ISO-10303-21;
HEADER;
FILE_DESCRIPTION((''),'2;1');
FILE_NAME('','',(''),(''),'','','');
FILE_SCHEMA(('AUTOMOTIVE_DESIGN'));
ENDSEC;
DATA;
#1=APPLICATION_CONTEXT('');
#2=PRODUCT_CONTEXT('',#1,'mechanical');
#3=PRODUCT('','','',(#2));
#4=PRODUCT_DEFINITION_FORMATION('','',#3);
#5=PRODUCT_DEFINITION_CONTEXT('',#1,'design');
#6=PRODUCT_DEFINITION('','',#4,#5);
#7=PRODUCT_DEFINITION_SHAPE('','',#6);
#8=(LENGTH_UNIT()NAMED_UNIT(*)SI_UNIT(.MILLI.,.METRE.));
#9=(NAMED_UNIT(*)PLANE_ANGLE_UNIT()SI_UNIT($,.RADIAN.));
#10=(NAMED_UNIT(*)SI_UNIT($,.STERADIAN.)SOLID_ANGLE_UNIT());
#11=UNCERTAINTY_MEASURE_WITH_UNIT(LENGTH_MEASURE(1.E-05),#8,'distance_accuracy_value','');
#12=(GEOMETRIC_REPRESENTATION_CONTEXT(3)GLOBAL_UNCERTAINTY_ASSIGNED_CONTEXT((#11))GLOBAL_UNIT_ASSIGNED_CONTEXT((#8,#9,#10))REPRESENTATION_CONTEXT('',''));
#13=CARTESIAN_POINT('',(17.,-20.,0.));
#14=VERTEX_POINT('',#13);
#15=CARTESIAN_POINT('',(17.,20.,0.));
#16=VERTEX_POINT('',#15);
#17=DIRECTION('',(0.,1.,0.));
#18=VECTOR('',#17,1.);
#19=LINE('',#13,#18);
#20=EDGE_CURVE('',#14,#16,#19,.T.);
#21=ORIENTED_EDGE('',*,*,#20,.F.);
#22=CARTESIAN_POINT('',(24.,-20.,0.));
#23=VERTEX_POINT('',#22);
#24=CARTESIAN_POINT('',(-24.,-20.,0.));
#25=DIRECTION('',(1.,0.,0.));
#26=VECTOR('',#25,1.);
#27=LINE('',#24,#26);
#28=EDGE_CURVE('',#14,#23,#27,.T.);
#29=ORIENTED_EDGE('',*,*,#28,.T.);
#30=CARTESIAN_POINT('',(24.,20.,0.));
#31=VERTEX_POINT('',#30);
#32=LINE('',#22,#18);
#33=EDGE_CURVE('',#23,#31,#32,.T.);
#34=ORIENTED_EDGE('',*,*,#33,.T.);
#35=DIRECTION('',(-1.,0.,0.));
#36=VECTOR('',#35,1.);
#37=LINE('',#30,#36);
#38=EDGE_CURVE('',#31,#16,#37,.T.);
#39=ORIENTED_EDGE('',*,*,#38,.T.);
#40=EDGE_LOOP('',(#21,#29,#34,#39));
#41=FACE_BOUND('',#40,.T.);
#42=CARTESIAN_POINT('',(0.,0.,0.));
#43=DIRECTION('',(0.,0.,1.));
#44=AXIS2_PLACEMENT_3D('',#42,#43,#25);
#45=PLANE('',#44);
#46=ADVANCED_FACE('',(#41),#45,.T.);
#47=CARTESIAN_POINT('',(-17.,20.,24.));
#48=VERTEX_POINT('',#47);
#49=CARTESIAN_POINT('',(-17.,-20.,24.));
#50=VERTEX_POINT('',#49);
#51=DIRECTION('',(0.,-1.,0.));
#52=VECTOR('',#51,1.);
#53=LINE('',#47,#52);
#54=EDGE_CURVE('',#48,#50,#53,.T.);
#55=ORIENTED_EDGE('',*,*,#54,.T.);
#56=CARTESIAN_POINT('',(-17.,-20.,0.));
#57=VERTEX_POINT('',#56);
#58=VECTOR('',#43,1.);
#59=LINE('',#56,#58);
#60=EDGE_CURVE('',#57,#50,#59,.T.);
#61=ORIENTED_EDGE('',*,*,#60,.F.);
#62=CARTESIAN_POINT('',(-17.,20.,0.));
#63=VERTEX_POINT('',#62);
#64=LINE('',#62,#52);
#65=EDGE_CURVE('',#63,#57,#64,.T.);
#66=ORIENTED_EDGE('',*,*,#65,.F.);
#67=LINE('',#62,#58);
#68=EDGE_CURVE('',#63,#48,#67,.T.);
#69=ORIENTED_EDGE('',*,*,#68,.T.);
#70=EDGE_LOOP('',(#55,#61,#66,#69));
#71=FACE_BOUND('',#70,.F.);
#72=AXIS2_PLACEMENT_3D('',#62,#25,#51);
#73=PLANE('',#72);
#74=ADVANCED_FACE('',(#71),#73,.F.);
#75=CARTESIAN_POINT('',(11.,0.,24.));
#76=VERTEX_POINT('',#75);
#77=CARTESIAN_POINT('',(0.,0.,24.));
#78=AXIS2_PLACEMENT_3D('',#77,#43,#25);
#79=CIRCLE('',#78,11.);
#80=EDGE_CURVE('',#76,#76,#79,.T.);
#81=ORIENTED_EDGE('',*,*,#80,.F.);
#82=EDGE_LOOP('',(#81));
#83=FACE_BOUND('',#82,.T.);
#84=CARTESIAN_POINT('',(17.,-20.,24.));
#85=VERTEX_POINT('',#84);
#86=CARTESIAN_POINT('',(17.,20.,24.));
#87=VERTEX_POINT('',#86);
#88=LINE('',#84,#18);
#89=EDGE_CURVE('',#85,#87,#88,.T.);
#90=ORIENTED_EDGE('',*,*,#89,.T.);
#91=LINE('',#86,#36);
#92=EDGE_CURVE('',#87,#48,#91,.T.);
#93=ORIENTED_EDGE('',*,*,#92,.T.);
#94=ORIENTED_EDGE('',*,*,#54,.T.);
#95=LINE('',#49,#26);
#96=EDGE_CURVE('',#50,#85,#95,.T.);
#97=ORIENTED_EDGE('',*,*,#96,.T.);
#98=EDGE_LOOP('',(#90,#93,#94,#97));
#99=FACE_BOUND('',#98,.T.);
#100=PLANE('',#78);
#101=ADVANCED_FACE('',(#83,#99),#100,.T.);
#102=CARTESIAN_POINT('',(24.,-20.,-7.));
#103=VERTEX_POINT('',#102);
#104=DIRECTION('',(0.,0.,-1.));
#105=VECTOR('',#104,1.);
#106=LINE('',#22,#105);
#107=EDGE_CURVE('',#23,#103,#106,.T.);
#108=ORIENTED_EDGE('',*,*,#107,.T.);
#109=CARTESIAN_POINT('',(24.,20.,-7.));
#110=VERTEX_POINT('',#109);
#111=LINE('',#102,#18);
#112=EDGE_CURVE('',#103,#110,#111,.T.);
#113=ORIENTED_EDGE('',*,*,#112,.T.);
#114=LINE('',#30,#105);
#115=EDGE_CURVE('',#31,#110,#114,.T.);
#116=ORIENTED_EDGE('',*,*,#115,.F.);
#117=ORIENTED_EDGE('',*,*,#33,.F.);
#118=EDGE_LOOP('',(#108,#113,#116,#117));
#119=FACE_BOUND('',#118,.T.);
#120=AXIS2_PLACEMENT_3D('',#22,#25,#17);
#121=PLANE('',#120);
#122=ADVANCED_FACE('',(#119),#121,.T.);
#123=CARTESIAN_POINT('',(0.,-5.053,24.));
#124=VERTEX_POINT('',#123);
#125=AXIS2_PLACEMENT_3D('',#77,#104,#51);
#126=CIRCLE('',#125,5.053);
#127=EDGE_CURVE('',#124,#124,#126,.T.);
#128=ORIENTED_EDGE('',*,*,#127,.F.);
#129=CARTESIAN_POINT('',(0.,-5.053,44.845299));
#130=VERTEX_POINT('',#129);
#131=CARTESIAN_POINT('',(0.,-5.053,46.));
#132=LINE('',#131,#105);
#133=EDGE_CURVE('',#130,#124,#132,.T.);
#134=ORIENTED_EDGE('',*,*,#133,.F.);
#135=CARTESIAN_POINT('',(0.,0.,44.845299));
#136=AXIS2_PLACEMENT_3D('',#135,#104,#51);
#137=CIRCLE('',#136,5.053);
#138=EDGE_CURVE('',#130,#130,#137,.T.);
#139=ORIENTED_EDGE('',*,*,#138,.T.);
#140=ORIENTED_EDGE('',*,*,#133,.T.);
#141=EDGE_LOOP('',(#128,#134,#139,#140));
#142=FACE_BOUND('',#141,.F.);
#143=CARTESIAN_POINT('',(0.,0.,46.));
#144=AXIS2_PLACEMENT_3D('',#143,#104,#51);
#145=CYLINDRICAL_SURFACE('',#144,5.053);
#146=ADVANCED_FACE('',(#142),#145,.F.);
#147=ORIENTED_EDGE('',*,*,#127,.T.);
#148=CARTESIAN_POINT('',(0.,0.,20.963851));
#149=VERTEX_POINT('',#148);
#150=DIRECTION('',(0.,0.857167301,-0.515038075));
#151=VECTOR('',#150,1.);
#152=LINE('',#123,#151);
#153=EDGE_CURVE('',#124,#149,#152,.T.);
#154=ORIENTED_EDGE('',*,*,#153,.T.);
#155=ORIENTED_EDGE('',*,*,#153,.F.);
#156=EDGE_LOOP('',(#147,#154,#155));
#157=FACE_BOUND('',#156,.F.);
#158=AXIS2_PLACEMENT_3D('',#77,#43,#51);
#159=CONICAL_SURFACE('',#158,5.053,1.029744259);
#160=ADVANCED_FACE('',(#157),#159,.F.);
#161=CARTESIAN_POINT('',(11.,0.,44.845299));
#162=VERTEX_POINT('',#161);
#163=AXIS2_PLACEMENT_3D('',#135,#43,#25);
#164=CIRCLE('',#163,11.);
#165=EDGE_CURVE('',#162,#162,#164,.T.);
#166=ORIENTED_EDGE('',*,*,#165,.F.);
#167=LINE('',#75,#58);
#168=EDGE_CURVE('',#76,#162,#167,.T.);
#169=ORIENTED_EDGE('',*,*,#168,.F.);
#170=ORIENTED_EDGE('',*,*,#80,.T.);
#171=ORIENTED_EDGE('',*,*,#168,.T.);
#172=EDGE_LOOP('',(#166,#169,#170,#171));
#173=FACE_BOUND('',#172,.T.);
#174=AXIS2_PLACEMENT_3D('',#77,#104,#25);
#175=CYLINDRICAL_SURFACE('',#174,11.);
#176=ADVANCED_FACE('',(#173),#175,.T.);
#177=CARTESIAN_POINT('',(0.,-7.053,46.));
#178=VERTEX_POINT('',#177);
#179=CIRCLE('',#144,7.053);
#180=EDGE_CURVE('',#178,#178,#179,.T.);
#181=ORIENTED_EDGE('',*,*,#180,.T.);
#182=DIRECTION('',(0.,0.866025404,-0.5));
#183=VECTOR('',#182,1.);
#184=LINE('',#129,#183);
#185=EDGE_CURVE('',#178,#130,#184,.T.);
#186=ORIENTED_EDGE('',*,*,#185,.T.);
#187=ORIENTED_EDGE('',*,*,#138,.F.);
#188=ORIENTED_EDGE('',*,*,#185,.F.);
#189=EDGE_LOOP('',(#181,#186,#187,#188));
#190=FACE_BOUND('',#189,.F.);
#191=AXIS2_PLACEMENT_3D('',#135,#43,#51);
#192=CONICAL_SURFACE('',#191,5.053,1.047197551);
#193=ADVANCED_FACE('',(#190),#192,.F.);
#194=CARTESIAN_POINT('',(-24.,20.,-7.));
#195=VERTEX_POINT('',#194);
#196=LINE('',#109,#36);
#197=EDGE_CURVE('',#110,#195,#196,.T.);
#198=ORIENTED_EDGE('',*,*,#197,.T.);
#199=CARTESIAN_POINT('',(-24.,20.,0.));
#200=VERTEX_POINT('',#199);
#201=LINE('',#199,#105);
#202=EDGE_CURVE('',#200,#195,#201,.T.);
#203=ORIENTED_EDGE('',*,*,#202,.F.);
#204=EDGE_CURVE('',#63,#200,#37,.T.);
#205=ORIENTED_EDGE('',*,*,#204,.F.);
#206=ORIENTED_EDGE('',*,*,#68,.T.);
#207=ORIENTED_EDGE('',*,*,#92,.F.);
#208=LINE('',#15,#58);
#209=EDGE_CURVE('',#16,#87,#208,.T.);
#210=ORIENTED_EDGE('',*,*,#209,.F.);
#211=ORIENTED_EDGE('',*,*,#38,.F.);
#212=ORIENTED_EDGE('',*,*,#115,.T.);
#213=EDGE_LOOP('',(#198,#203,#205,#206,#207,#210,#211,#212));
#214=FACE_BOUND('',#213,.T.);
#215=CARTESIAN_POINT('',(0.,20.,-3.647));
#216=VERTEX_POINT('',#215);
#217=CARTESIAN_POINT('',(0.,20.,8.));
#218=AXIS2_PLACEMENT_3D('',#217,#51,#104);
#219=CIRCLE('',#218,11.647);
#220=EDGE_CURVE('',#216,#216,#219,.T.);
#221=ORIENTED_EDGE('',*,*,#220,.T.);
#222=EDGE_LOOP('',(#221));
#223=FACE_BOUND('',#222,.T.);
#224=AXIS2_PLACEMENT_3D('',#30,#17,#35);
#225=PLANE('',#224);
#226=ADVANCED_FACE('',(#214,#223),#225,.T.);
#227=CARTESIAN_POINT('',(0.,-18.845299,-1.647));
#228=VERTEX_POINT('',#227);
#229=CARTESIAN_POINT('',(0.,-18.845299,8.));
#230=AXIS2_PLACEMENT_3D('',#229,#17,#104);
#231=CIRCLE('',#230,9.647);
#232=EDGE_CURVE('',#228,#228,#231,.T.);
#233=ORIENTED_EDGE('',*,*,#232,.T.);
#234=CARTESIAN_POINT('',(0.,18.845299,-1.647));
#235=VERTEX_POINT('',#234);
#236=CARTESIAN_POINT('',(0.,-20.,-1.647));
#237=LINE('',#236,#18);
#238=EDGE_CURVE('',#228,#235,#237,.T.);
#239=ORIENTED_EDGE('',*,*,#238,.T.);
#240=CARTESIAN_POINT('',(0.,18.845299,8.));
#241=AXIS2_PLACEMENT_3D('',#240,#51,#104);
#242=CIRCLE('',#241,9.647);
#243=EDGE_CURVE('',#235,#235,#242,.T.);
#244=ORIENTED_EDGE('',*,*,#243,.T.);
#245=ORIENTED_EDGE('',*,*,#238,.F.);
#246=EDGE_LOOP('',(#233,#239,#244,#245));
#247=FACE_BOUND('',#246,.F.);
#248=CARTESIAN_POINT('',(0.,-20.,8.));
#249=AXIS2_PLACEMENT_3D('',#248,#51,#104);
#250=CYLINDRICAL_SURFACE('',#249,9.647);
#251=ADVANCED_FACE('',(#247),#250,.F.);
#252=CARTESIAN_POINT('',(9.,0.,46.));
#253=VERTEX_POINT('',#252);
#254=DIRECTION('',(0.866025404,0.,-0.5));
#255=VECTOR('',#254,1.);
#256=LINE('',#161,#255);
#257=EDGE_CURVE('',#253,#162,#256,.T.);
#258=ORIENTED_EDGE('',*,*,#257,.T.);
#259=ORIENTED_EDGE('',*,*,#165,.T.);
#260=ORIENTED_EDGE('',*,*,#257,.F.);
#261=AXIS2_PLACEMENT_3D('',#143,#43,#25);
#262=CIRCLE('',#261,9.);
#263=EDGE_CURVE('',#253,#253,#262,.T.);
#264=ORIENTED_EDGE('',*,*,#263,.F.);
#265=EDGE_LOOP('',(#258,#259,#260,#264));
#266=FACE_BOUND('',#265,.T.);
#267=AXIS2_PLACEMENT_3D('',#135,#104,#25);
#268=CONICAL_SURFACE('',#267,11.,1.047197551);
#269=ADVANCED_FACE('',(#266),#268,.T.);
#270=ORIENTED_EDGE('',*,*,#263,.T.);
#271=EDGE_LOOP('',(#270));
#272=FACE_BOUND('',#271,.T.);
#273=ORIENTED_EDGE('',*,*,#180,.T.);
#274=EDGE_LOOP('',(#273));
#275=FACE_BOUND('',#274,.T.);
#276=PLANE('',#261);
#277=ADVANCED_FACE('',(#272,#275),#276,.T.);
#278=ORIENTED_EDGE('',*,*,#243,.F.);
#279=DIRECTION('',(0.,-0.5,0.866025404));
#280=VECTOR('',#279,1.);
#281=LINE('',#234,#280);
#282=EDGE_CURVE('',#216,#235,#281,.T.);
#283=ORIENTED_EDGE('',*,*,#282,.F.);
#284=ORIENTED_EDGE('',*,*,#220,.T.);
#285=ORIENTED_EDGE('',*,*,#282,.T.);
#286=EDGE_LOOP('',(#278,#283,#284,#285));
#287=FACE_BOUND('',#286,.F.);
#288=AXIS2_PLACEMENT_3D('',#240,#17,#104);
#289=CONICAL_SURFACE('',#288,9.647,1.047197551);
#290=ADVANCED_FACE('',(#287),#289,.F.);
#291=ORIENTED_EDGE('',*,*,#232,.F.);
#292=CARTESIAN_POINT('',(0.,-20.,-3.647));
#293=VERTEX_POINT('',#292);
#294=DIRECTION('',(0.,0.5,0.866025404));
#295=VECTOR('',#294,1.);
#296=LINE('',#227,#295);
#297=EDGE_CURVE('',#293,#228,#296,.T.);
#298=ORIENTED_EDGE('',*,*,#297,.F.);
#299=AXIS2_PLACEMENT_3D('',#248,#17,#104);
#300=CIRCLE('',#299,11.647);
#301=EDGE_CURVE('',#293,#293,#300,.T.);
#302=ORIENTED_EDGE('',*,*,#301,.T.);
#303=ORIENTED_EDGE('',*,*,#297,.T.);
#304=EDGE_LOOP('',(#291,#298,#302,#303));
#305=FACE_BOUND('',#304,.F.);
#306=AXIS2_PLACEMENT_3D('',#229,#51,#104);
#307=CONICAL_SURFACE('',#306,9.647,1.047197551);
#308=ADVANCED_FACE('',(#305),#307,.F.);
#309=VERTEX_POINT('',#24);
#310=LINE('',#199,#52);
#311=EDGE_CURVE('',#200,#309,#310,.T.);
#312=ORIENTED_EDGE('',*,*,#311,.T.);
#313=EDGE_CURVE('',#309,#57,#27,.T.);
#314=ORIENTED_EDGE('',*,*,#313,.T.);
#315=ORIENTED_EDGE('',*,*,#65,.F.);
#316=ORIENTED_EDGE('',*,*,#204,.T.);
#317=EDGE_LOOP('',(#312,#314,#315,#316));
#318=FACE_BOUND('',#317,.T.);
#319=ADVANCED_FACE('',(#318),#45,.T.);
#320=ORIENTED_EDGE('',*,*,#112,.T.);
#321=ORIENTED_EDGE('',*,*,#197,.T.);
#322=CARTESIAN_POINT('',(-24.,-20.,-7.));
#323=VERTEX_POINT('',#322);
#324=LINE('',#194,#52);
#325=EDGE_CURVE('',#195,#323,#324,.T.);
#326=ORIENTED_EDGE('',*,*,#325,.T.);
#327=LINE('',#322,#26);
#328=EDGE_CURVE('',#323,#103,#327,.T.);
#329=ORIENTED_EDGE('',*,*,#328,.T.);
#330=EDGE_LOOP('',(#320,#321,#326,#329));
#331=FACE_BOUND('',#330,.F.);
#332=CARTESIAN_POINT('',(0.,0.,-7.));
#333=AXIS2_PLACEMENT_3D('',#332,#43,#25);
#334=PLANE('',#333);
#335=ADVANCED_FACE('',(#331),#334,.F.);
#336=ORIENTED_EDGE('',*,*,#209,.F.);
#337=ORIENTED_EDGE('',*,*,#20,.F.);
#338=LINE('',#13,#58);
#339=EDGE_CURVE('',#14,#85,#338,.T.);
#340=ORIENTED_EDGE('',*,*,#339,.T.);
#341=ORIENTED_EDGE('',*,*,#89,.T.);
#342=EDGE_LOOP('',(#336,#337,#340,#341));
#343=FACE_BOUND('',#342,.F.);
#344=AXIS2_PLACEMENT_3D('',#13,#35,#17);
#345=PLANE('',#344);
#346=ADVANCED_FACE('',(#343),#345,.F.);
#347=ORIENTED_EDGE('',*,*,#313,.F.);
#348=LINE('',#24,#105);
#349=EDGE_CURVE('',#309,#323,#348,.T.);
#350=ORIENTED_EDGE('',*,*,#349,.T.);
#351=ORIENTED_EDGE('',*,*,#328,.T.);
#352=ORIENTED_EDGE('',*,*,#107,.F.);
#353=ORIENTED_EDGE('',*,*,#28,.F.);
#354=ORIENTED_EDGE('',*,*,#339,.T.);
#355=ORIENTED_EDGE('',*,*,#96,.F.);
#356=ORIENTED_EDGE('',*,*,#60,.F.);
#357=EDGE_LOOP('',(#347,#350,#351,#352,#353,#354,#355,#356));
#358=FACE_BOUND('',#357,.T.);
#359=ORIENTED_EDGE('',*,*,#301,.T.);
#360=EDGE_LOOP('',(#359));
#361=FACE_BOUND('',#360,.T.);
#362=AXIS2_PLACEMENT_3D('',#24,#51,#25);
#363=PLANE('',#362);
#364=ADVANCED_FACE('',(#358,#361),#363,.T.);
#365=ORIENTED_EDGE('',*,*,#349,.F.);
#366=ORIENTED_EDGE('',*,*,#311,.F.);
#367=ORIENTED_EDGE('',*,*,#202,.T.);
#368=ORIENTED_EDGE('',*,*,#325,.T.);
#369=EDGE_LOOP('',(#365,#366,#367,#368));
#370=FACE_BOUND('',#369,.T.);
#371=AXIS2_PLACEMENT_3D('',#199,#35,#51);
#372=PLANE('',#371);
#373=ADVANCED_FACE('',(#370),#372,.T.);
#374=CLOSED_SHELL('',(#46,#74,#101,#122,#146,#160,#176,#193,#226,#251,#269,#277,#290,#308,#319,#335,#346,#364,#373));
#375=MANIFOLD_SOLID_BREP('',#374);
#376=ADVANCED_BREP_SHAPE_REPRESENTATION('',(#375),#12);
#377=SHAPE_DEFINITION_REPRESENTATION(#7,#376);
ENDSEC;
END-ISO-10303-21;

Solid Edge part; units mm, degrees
sketch "Sketch1" plane through (0, 0, 0) normal (0, 0, 1) x (1, 0, 0)
  line L0 (24, -20) -> (24, 20)
  line L1 (24, 20) -> (-24, 20)
  line L2 (-24, 20) -> (-24, -20)
  line L3 (-24, -20) -> (24, -20)
extrude "Protrusion1" add sketch "Sketch1" against normal blind 7
sketch "Sketch2" plane through (0, 0, 0) normal (0, 0, 1) x (1, 0, 0)
  line L0 (17, -20) -> (17, 20)
  line L1 (17, 20) -> (-17, 20)
  line L2 (-17, 20) -> (-17, -20)
  line L3 (-17, -20) -> (17, -20)
extrude "拉伸_2" add sketch "Sketch2" along normal blind 24
sketch "Sketch3" plane through (0, 0, 24) normal (0, 0, 1) x (1, 0, 0)
  circle A0 centre (0, 0) radius 11
extrude "拉伸_3" add sketch "Sketch3" along normal blind 22
hole "孔_1" at (0, 0, 46) direction (0, 0, -1) diameter 10.106 depth 22 tip angle 118 thread major 12 thread length 16
hole "孔_3" at (0, -20, 8) direction (0, 1, 0) diameter 19.294 end up to next
chamfer "倒斜角_2" distance 2 angle 30 4 edges at (-11, 0, 46) (0, 5.053, 46) (-9.647, -20, 8) (0, 20, -1.647) measured on face at (-7.5533, -7.1133, 46) measured on face at (16.48, 20, -1.5233) measured on face at (-16.48, -20, -1.5233)
properties material "钢铁"
